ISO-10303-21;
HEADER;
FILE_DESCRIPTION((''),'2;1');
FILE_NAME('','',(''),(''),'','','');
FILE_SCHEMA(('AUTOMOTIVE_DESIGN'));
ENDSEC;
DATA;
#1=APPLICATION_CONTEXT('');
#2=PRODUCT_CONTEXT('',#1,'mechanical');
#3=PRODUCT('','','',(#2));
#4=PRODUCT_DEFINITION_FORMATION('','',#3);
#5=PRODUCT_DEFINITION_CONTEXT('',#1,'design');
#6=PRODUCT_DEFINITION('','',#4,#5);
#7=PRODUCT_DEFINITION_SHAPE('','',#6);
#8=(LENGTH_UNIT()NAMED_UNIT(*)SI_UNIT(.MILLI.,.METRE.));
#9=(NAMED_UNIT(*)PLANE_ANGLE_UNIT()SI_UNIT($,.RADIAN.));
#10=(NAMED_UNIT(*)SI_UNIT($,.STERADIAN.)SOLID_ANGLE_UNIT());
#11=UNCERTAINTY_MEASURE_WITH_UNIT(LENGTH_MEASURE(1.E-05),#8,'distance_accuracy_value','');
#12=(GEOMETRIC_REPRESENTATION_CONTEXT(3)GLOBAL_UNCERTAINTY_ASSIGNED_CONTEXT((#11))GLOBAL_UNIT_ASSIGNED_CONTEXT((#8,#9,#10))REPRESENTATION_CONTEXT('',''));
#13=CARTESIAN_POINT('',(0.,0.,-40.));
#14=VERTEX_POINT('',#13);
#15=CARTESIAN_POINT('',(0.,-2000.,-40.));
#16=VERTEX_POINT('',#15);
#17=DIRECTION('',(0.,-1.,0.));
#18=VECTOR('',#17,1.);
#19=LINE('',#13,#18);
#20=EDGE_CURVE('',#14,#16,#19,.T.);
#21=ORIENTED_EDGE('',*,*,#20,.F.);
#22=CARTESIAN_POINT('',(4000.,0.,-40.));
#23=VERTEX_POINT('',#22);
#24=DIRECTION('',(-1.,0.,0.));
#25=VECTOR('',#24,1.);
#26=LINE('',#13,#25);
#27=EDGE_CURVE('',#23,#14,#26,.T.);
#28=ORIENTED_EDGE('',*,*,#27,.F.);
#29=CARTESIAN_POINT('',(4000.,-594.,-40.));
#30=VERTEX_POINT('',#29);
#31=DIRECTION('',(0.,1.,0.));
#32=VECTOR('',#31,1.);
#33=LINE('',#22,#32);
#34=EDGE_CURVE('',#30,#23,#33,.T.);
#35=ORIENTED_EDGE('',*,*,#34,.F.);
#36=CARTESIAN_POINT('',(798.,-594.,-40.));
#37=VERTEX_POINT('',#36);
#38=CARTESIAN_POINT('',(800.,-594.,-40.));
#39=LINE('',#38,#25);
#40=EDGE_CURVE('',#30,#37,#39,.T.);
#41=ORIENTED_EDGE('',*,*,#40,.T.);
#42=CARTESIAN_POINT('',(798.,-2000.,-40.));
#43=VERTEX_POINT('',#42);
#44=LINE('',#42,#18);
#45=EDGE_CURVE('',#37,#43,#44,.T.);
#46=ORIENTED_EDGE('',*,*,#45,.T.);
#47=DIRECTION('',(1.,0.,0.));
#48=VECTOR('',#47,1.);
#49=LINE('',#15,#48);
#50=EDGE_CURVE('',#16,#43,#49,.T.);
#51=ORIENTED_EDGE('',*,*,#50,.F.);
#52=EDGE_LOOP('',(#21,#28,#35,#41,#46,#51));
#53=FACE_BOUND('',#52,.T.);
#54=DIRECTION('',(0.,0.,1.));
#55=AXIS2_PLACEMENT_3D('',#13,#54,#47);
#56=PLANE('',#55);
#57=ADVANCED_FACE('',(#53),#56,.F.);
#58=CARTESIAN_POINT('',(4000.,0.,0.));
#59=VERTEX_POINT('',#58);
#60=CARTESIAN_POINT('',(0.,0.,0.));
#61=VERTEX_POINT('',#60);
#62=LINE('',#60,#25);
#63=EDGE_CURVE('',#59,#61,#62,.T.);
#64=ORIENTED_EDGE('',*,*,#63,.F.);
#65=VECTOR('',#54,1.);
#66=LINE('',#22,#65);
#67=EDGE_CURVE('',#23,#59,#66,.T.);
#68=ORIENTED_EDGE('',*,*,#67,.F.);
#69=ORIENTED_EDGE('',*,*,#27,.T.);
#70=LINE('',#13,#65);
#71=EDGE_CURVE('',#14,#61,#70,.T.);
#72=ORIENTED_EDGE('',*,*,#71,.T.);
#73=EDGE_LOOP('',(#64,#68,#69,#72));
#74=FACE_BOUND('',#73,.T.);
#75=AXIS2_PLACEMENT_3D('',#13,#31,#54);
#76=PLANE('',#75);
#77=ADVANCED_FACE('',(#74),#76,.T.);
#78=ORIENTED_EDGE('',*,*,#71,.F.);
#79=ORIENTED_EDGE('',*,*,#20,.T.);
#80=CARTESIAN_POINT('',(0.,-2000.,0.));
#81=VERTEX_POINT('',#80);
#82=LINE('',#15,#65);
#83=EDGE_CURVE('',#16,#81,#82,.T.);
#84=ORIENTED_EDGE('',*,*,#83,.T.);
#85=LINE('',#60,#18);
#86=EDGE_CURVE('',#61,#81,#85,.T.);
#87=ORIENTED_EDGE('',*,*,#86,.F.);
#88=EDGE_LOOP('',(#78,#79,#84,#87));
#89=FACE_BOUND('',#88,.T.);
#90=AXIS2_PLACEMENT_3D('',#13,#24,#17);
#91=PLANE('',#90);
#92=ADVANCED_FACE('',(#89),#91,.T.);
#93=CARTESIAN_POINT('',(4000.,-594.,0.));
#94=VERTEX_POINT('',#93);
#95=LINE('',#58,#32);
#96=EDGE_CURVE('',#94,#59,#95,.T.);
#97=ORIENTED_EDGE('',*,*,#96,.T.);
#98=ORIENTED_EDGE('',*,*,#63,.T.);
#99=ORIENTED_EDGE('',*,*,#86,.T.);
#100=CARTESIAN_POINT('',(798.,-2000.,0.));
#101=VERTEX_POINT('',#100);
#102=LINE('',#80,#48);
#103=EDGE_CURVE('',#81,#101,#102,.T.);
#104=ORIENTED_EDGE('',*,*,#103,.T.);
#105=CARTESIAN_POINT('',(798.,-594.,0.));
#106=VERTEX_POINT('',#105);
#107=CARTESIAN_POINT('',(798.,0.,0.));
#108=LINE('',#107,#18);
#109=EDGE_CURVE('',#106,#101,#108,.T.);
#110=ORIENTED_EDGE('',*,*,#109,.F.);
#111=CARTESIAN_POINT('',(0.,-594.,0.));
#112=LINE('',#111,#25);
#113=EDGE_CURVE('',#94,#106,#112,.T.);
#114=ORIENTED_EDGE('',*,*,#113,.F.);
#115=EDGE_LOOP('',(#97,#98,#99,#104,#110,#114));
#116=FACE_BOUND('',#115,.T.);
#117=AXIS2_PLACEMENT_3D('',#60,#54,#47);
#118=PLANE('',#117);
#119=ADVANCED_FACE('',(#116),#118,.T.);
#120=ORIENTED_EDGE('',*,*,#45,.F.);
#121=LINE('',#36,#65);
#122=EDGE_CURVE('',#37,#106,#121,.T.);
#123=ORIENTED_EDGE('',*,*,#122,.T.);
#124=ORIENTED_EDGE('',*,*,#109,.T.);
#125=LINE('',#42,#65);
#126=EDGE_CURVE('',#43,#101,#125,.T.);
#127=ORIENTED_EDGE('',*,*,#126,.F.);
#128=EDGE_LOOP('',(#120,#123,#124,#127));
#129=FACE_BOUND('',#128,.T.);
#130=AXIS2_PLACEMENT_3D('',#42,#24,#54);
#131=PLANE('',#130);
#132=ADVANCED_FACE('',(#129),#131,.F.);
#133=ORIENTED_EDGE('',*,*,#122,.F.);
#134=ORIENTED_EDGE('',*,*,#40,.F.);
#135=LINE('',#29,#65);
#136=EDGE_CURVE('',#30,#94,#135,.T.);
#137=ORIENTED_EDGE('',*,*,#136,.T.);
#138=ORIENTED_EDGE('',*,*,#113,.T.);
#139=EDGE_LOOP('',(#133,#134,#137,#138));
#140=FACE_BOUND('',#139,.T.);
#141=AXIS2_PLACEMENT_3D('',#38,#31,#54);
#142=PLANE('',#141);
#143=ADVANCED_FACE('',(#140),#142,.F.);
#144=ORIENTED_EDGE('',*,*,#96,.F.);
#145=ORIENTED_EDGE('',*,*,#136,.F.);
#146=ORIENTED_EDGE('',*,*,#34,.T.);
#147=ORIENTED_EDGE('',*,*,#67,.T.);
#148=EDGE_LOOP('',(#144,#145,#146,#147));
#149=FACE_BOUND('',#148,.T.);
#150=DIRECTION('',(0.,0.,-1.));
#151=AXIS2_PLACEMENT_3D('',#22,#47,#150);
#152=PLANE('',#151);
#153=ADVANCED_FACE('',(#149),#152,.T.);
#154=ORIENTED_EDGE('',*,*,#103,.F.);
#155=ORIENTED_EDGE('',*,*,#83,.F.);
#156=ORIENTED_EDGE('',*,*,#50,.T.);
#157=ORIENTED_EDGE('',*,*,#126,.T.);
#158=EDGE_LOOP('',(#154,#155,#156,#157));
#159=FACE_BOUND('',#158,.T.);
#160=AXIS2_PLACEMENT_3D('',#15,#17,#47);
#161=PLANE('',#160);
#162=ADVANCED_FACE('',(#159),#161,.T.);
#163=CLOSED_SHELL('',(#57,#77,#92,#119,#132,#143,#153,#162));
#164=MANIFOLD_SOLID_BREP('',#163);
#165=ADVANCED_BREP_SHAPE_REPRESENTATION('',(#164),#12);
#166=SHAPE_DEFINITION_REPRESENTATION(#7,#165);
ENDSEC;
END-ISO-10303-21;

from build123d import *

# Parameters (mm, degrees)
TABAN_FLAN_1_DEPTH         = 40
KES_EKSTR_ZYON1_DEPTH      = 4473.31483686
KES_EKSTR_ZYON1_DEPTH_BACK = 4473.31483686
IZIM2_W                    = 3200
IZIM2_H                    = 350
KES_EKSTR_ZYON2_DEPTH      = 4473.31483686
KES_EKSTR_ZYON2_DEPTH_BACK = 4473.31483686
IZIM3_W                    = 3200
IZIM3_H                    = 6
KES_EKSTR_ZYON3_DEPTH      = 4473.31483686
KES_EKSTR_ZYON3_DEPTH_BACK = 4473.31483686
IZIM4_W                    = 2
IZIM4_H                    = 1406


# Sheet-metal steps are written as plain solids
with BuildPart() as part:
    # Çizim1 → Taban-Flanş1 (new body)
    with BuildSketch(Plane.XY):
        Polygon((0, 0), (4000, 0), (4000, -950), (800, -950), (800, -2000), (0, -2000), align=None)
    extrude(amount=-TABAN_FLAN_1_DEPTH)

    # Çizim2 → Kes-Ekstrüzyon1 (cut, two sides: drawn at the far end of the back side and taken through both)
    with BuildSketch(Plane.XY.offset(-KES_EKSTR_ZYON1_DEPTH_BACK)):
        with Locations((2400, -775)):
            Rectangle(IZIM2_W, IZIM2_H)
    extrude(amount=KES_EKSTR_ZYON1_DEPTH + KES_EKSTR_ZYON1_DEPTH_BACK, mode=Mode.SUBTRACT)

    # Çizim3 → Kes-Ekstrüzyon2 (cut, two sides: drawn at the far end of the back side and taken through both)
    with BuildSketch(Plane.XY.offset(-KES_EKSTR_ZYON2_DEPTH_BACK)):
        with Locations((2400, -597)):
            Rectangle(IZIM3_W, IZIM3_H)
    extrude(amount=KES_EKSTR_ZYON2_DEPTH + KES_EKSTR_ZYON2_DEPTH_BACK, mode=Mode.SUBTRACT)

    # Çizim4 → Kes-Ekstrüzyon3 (cut, two sides: drawn at the far end of the back side and taken through both)
    with BuildSketch(Plane.XY.offset(-KES_EKSTR_ZYON3_DEPTH_BACK)):
        with Locations((799, -1297)):
            Rectangle(IZIM4_W, IZIM4_H)
    extrude(amount=KES_EKSTR_ZYON3_DEPTH + KES_EKSTR_ZYON3_DEPTH_BACK, mode=Mode.SUBTRACT)


solid = part.part
